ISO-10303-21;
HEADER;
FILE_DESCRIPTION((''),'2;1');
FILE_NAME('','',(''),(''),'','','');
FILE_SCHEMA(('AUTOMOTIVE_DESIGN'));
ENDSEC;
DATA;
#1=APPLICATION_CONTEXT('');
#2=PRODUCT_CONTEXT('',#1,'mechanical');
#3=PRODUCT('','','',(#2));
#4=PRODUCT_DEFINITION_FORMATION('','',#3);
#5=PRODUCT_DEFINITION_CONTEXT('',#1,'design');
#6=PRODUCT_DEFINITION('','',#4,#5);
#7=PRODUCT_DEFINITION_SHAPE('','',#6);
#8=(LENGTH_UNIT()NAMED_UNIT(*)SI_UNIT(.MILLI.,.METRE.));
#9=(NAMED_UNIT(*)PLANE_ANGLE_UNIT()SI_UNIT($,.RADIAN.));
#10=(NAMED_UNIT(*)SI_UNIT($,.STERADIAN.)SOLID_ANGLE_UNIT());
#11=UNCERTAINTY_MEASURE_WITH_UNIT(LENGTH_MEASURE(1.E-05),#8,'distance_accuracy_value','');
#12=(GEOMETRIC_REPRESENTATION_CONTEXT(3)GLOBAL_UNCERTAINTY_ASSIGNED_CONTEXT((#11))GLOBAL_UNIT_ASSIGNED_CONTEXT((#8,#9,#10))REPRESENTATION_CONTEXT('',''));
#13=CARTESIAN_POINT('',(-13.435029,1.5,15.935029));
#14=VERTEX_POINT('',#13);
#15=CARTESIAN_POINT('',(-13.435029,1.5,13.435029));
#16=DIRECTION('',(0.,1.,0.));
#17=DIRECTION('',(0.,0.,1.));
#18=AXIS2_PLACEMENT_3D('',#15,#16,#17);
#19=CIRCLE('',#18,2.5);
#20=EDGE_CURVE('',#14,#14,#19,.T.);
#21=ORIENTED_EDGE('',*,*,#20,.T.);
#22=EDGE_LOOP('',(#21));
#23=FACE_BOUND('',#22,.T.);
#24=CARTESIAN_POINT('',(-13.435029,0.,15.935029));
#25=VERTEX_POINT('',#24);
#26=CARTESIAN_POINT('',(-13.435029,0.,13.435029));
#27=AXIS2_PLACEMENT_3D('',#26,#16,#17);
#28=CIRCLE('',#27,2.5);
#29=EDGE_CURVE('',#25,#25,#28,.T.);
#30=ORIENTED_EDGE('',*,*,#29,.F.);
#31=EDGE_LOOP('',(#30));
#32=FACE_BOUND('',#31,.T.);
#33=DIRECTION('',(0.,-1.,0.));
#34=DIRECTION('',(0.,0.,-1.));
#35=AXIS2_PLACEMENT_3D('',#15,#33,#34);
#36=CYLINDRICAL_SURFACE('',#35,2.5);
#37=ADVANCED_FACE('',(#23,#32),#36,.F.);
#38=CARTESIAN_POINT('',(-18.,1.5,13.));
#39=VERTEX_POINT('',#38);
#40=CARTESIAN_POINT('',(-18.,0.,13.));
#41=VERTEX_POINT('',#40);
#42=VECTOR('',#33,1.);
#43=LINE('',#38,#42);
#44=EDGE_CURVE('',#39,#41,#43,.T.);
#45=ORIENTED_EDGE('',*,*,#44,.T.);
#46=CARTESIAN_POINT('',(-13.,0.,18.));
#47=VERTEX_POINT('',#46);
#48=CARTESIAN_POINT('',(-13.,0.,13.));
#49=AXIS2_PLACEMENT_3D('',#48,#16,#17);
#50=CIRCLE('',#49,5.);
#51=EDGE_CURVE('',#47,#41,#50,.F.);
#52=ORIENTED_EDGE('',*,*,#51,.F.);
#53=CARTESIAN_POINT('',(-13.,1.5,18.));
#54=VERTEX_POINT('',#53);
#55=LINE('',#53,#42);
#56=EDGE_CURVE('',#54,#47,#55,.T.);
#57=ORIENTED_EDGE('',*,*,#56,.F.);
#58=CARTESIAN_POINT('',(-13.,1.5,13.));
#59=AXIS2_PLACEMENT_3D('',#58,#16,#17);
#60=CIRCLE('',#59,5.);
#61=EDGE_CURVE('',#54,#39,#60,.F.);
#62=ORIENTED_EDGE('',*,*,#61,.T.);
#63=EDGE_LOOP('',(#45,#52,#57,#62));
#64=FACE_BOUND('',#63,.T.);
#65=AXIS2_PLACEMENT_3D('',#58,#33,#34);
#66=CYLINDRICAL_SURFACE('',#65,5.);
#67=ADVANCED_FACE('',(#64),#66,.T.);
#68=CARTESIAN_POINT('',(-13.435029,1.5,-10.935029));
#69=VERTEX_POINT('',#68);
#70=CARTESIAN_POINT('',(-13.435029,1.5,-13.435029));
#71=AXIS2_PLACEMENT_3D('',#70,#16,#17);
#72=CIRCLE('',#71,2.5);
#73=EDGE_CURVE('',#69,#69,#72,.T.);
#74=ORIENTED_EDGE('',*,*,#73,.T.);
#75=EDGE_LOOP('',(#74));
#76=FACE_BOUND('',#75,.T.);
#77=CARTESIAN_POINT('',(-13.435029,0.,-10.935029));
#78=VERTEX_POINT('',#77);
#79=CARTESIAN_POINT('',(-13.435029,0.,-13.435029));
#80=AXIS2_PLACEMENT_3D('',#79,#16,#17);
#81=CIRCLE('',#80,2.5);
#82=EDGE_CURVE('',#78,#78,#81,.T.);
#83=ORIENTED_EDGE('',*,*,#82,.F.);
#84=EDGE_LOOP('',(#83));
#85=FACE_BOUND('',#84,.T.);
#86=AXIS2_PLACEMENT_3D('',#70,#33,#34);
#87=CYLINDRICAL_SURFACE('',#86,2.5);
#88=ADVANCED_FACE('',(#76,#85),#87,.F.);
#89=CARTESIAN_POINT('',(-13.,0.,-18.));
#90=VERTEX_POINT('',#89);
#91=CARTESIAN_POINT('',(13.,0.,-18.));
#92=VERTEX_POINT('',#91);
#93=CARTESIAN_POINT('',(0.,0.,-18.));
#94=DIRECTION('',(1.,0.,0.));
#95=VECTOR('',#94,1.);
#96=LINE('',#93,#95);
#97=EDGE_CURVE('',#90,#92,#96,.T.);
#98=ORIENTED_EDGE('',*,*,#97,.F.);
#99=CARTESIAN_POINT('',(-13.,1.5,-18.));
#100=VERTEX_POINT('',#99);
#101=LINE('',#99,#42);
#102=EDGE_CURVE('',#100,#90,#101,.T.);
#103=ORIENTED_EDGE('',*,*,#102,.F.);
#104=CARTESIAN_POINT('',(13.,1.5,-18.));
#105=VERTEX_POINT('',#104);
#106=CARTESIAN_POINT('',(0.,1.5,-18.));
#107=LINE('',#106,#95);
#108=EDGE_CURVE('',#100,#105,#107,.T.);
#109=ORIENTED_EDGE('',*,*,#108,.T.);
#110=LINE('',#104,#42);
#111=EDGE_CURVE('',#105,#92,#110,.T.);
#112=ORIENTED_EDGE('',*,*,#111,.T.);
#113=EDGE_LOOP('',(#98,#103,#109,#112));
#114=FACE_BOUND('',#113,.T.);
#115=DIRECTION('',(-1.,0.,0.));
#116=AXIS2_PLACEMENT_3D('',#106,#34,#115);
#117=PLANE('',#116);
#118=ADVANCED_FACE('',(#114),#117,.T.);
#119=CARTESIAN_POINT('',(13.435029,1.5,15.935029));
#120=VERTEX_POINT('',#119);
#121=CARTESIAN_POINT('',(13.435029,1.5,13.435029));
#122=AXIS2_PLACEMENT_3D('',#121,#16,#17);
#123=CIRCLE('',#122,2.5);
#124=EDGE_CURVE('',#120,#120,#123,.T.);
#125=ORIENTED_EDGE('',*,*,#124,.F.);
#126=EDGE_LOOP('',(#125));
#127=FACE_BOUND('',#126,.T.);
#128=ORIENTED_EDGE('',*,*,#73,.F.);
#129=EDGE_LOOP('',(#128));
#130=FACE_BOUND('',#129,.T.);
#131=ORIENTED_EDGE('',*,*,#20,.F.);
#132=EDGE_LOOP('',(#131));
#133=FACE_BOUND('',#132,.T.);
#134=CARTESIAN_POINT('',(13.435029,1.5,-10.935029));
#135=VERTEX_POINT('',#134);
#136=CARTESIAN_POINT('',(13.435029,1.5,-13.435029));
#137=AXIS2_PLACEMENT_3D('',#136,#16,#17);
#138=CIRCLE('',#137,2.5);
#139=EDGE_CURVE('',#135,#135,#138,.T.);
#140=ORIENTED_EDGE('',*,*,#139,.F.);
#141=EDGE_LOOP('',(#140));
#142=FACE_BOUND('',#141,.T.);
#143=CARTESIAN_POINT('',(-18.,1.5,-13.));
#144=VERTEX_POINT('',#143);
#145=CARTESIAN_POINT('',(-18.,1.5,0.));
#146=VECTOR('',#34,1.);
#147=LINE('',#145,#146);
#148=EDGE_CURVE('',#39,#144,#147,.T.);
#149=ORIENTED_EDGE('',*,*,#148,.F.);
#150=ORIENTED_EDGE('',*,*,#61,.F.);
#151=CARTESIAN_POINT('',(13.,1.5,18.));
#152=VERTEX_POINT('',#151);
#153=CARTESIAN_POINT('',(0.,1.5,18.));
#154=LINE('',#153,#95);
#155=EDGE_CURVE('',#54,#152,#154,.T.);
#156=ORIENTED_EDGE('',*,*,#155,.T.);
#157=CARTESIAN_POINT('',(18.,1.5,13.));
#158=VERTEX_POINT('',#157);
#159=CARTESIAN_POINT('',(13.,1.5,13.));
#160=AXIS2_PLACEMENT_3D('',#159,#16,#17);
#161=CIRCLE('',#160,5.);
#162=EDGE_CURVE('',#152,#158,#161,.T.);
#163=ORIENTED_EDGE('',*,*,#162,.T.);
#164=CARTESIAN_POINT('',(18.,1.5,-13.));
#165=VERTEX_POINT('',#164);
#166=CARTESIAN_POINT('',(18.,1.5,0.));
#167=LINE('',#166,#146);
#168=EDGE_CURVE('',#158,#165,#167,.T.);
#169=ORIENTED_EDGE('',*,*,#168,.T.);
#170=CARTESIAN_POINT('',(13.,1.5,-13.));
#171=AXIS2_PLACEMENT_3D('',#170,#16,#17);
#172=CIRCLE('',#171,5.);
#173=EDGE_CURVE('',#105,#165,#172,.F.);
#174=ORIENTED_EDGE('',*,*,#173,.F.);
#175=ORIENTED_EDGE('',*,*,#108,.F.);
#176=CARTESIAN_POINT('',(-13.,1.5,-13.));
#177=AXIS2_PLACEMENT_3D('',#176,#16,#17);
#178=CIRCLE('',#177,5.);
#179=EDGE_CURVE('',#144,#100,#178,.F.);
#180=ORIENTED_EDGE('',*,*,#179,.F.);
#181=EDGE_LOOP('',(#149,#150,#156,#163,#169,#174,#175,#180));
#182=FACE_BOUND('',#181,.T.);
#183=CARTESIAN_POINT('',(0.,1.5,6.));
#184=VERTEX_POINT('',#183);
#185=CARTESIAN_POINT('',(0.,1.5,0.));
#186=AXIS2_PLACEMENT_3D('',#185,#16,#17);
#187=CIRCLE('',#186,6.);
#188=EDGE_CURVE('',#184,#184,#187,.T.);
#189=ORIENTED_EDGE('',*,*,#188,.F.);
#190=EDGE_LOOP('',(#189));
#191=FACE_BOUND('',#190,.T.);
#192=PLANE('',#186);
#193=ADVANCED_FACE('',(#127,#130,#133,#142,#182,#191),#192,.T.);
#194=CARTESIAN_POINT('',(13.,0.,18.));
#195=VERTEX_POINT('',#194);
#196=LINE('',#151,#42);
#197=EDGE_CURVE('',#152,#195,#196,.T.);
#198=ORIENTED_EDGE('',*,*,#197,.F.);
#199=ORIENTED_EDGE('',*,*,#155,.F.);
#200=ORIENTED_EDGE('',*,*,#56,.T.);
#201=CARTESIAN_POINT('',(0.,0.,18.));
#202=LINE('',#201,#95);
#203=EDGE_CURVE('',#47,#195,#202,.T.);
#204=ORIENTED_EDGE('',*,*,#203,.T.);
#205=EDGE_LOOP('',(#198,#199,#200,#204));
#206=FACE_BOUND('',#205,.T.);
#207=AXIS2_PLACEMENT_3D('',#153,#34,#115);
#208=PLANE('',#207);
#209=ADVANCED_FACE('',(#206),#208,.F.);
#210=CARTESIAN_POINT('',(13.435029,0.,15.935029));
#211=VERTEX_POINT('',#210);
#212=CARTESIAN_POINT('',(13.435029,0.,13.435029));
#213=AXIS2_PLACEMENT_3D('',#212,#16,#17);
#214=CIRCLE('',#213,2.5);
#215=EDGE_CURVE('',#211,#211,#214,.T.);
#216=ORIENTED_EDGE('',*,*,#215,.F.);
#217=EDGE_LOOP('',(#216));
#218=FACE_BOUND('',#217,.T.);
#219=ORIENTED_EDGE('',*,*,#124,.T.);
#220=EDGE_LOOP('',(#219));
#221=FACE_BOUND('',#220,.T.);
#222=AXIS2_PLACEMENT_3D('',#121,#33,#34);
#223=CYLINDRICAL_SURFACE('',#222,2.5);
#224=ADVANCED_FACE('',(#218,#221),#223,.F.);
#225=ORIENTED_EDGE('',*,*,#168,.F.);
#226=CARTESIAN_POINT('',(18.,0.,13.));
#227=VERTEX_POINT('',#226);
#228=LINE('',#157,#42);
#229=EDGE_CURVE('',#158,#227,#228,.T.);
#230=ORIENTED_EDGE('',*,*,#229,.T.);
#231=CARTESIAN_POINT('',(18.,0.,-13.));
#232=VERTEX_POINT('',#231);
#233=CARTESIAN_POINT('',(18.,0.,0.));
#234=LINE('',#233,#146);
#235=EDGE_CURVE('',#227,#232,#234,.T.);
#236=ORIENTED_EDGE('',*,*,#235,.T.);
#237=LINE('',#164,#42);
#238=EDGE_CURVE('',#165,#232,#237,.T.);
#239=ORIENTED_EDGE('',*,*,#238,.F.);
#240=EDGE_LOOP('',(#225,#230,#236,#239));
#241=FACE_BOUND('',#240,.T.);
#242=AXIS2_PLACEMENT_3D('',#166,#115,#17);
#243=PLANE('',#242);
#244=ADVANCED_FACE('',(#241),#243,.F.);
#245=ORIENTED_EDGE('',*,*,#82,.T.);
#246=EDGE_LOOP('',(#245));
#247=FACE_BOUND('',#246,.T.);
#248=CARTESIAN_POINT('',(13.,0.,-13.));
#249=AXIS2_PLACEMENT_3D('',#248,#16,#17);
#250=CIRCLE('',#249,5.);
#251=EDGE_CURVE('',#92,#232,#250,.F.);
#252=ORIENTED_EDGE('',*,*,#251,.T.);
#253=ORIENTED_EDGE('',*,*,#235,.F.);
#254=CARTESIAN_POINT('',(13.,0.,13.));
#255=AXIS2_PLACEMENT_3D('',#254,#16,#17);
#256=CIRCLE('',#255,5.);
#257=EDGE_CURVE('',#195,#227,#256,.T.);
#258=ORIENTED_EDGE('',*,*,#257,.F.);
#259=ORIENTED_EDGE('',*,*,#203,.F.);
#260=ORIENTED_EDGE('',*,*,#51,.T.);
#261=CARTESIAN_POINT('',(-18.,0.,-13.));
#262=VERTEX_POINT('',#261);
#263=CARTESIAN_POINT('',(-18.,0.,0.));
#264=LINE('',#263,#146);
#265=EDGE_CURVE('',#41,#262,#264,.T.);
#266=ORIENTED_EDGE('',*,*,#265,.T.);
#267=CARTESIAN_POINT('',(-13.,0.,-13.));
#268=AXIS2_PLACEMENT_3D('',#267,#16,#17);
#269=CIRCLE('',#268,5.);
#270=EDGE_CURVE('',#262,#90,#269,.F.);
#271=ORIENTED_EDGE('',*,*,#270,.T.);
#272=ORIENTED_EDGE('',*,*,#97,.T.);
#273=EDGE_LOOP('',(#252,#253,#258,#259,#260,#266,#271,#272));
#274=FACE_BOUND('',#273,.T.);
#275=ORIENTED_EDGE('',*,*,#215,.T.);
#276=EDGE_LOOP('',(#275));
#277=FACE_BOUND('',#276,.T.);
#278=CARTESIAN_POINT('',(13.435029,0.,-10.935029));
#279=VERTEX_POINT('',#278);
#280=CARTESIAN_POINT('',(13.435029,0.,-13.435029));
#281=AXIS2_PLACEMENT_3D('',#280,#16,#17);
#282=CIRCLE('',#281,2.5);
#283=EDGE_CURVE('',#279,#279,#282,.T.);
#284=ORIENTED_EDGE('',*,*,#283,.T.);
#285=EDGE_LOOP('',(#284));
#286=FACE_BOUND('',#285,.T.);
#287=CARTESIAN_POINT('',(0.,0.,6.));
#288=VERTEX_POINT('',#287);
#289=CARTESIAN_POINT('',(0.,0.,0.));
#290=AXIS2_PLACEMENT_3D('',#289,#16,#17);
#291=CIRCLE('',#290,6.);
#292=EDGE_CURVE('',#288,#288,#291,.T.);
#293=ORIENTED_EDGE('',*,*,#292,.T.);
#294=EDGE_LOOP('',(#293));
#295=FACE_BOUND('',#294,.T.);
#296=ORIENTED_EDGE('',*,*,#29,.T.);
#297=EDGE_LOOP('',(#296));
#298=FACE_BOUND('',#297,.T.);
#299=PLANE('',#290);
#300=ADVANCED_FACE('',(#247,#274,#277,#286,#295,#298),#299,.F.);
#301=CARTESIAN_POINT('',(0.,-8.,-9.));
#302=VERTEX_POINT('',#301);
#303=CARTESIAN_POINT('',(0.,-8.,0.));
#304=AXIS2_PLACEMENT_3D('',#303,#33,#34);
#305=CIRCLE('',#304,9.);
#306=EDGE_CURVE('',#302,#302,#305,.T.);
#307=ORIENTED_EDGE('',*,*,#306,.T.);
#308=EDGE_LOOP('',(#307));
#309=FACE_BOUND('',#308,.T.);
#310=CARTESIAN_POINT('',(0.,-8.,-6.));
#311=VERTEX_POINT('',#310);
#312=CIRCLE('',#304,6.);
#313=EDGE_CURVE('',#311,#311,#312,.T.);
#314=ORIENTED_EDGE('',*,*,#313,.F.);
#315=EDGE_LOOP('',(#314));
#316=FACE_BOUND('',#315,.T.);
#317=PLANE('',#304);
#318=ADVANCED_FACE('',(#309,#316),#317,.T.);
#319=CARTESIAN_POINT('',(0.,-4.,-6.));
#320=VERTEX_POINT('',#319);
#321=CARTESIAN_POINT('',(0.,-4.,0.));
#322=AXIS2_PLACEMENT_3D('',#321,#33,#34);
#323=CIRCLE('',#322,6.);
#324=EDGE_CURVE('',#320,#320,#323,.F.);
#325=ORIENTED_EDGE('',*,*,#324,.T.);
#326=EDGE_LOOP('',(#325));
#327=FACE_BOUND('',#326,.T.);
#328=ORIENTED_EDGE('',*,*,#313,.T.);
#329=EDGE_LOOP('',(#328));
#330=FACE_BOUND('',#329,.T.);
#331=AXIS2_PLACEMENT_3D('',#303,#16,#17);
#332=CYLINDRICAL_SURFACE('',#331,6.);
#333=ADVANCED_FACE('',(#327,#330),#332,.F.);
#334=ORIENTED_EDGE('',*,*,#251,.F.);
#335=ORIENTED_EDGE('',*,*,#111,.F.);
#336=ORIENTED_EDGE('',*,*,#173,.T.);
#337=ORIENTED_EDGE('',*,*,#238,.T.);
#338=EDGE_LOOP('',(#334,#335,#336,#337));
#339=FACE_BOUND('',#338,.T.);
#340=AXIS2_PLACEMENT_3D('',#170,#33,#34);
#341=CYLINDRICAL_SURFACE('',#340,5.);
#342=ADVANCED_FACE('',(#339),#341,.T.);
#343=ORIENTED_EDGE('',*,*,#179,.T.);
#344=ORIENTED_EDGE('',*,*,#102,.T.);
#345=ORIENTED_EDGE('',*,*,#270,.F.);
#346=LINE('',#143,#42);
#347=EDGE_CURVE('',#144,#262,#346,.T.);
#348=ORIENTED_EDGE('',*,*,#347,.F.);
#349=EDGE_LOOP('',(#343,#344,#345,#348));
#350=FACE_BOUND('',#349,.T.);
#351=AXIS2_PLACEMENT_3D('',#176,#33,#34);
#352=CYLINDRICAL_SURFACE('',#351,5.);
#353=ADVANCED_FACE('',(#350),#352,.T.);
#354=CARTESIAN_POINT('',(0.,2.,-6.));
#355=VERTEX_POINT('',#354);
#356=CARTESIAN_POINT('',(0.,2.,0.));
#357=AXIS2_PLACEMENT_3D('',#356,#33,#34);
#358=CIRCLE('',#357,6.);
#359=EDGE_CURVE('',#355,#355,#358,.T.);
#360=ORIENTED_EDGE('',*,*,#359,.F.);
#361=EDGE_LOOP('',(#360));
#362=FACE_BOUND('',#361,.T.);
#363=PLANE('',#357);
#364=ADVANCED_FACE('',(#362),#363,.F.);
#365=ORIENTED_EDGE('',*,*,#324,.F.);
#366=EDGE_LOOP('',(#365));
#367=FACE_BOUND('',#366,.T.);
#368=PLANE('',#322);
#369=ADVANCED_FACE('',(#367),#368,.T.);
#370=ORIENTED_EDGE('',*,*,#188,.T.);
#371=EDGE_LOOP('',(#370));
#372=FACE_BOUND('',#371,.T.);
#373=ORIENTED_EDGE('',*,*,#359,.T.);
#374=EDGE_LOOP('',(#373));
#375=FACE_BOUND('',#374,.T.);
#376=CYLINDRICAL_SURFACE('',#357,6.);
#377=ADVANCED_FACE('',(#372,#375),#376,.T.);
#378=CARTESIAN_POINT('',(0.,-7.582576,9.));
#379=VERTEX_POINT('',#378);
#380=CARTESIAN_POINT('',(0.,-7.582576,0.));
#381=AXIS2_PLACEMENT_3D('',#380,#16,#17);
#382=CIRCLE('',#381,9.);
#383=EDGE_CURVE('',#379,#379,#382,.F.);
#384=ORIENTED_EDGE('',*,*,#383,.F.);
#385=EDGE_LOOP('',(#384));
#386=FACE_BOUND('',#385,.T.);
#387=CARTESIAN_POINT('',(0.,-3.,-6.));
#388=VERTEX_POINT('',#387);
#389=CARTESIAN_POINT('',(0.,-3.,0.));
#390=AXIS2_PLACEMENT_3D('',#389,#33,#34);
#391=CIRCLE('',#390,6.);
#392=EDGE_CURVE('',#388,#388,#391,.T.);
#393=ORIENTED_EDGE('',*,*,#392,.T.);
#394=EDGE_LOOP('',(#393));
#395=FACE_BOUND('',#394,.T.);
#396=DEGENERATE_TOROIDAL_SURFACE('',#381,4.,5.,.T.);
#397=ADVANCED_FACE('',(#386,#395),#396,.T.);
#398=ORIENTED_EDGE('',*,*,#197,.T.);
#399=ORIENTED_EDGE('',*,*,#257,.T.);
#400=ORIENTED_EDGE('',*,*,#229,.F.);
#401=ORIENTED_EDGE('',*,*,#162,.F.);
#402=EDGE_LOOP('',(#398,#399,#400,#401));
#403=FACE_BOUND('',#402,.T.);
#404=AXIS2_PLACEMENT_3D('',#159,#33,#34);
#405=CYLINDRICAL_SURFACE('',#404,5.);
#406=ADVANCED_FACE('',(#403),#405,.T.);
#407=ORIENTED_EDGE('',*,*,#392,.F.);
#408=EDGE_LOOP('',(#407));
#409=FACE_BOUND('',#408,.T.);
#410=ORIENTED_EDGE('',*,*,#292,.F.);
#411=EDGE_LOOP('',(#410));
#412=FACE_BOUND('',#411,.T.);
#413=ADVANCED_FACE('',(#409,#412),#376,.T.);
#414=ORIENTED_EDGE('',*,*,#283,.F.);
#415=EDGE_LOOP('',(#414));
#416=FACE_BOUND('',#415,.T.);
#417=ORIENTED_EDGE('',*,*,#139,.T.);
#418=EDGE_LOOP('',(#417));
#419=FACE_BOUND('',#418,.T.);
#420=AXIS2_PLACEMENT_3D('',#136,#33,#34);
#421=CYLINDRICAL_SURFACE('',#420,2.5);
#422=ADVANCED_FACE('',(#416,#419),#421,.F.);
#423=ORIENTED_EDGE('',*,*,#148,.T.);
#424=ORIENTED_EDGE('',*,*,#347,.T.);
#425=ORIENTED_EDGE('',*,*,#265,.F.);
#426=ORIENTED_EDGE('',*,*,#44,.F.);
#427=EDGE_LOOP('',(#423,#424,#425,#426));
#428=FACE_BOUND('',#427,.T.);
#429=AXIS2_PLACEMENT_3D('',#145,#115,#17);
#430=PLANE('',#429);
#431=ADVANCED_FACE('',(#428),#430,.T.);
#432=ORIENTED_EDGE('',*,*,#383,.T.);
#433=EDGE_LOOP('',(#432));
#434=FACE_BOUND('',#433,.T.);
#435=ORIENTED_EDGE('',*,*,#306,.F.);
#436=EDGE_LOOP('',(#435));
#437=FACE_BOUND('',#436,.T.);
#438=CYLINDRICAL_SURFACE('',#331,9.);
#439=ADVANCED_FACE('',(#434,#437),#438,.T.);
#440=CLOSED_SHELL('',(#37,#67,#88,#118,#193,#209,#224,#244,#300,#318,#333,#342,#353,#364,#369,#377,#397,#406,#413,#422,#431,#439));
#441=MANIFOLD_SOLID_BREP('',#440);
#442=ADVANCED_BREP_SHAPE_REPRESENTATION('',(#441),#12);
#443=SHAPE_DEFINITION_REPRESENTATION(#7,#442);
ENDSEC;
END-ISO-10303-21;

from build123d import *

# Parameters (mm, degrees)
SKETCH1_R                = 2.5
BOSS_EXTRUDE1_DEPTH      = 1.5
BOSS_EXTRUDE2_DEPTH      = 4
BOSS_EXTRUDE2_DEPTH_BACK = 2
SKETCH2_R                = 6
SKETCH3_R                = 9
SKETCH3_R_2              = 6
BOSS_EXTRUDE3_DEPTH      = 5
FILLET1_R                = 5


with BuildPart() as part:
    # Sketch1 → Boss-Extrude1 (new body)
    with BuildSketch(Plane(origin=(0, 0, 0), x_dir=(1, 0, 0), z_dir=(0, 1, 0))):
        with BuildLine():
            Line((-13, -18), (13, -18))
            ThreePointArc((13, -18), (16.535533906, -16.535533906), (18, -13))
            Line((18, -13), (18, 13))
            ThreePointArc((18, 13), (16.535533906, 16.535533906), (13, 18))
            Line((13, 18), (-13, 18))
            ThreePointArc((-13, 18), (-16.535533906, 16.535533906), (-18, 13))
            Line((-18, 13), (-18, -13))
            ThreePointArc((-18, -13), (-16.535533906, -16.535533906), (-13, -18))
        make_face()
        with Locations(Location((13.435028843, 13.435028843, 0), (0, 0, 270))):
            Circle(SKETCH1_R, mode=Mode.SUBTRACT)
        with Locations(Location((-13.435028843, -13.435028843, 0), (0, 0, 270))):
            Circle(SKETCH1_R, mode=Mode.SUBTRACT)
        with Locations(Location((-13.435028843, 13.435028843, 0), (0, 0, 270))):
            Circle(SKETCH1_R, mode=Mode.SUBTRACT)
        with Locations(Location((13.435028843, -13.435028843, 0), (0, 0, 270))):
            Circle(SKETCH1_R, mode=Mode.SUBTRACT)
    extrude(amount=BOSS_EXTRUDE1_DEPTH)

    # Sketch2 → Boss-Extrude2 (add, two sides: drawn at the far end of the back side and taken through both)
    with BuildSketch(Plane.XZ.offset(-BOSS_EXTRUDE2_DEPTH_BACK)):
        with Locations(Location((0, 0, 0), (0, 0, 270))):
            Circle(SKETCH2_R)
    extrude(amount=BOSS_EXTRUDE2_DEPTH + BOSS_EXTRUDE2_DEPTH_BACK)

    # Sketch3 → Boss-Extrude3 (add)
    with BuildSketch(Plane(origin=(0, -3, 0), x_dir=(-1, 0, 0), z_dir=(0, -1, 0))):
        with Locations(Location((0, 0, 0), (0, 0, 90))):
            Circle(SKETCH3_R)
        with Locations(Location((0, 0, 0), (0, 0, 90))):
            Circle(SKETCH3_R_2, mode=Mode.SUBTRACT)
    extrude(amount=BOSS_EXTRUDE3_DEPTH)

    # Fillet1
    # the kernel refuses this fillet: 5 mm, written as the material it takes off along each edge
    with BuildSketch(Plane(origin=(0, -3, 0), x_dir=(0, 0, -1), z_dir=(-1, 0, 0))) as fillet1_piece_1:
        with BuildLine():
            CenterArc((4, 4.582575695), FILLET1_R, 293.578178478, 66.421821522)
            Line((9, 4.582575695), (9.1, 4.582575695))
            Line((9.1, 4.582575695), (9.1, 0))
            Line((9.1, 0), (9, -0.1))
            ThreePointArc((9, -0.1), (7.5, -0.1), (6.04, -0.091651514))
            Line((6.04, -0.091651514), (6, 0))
        make_face()
    revolve(axis=Axis((0, -3, 0), (0, -1, 0)), mode=Mode.SUBTRACT)


solid = part.part
